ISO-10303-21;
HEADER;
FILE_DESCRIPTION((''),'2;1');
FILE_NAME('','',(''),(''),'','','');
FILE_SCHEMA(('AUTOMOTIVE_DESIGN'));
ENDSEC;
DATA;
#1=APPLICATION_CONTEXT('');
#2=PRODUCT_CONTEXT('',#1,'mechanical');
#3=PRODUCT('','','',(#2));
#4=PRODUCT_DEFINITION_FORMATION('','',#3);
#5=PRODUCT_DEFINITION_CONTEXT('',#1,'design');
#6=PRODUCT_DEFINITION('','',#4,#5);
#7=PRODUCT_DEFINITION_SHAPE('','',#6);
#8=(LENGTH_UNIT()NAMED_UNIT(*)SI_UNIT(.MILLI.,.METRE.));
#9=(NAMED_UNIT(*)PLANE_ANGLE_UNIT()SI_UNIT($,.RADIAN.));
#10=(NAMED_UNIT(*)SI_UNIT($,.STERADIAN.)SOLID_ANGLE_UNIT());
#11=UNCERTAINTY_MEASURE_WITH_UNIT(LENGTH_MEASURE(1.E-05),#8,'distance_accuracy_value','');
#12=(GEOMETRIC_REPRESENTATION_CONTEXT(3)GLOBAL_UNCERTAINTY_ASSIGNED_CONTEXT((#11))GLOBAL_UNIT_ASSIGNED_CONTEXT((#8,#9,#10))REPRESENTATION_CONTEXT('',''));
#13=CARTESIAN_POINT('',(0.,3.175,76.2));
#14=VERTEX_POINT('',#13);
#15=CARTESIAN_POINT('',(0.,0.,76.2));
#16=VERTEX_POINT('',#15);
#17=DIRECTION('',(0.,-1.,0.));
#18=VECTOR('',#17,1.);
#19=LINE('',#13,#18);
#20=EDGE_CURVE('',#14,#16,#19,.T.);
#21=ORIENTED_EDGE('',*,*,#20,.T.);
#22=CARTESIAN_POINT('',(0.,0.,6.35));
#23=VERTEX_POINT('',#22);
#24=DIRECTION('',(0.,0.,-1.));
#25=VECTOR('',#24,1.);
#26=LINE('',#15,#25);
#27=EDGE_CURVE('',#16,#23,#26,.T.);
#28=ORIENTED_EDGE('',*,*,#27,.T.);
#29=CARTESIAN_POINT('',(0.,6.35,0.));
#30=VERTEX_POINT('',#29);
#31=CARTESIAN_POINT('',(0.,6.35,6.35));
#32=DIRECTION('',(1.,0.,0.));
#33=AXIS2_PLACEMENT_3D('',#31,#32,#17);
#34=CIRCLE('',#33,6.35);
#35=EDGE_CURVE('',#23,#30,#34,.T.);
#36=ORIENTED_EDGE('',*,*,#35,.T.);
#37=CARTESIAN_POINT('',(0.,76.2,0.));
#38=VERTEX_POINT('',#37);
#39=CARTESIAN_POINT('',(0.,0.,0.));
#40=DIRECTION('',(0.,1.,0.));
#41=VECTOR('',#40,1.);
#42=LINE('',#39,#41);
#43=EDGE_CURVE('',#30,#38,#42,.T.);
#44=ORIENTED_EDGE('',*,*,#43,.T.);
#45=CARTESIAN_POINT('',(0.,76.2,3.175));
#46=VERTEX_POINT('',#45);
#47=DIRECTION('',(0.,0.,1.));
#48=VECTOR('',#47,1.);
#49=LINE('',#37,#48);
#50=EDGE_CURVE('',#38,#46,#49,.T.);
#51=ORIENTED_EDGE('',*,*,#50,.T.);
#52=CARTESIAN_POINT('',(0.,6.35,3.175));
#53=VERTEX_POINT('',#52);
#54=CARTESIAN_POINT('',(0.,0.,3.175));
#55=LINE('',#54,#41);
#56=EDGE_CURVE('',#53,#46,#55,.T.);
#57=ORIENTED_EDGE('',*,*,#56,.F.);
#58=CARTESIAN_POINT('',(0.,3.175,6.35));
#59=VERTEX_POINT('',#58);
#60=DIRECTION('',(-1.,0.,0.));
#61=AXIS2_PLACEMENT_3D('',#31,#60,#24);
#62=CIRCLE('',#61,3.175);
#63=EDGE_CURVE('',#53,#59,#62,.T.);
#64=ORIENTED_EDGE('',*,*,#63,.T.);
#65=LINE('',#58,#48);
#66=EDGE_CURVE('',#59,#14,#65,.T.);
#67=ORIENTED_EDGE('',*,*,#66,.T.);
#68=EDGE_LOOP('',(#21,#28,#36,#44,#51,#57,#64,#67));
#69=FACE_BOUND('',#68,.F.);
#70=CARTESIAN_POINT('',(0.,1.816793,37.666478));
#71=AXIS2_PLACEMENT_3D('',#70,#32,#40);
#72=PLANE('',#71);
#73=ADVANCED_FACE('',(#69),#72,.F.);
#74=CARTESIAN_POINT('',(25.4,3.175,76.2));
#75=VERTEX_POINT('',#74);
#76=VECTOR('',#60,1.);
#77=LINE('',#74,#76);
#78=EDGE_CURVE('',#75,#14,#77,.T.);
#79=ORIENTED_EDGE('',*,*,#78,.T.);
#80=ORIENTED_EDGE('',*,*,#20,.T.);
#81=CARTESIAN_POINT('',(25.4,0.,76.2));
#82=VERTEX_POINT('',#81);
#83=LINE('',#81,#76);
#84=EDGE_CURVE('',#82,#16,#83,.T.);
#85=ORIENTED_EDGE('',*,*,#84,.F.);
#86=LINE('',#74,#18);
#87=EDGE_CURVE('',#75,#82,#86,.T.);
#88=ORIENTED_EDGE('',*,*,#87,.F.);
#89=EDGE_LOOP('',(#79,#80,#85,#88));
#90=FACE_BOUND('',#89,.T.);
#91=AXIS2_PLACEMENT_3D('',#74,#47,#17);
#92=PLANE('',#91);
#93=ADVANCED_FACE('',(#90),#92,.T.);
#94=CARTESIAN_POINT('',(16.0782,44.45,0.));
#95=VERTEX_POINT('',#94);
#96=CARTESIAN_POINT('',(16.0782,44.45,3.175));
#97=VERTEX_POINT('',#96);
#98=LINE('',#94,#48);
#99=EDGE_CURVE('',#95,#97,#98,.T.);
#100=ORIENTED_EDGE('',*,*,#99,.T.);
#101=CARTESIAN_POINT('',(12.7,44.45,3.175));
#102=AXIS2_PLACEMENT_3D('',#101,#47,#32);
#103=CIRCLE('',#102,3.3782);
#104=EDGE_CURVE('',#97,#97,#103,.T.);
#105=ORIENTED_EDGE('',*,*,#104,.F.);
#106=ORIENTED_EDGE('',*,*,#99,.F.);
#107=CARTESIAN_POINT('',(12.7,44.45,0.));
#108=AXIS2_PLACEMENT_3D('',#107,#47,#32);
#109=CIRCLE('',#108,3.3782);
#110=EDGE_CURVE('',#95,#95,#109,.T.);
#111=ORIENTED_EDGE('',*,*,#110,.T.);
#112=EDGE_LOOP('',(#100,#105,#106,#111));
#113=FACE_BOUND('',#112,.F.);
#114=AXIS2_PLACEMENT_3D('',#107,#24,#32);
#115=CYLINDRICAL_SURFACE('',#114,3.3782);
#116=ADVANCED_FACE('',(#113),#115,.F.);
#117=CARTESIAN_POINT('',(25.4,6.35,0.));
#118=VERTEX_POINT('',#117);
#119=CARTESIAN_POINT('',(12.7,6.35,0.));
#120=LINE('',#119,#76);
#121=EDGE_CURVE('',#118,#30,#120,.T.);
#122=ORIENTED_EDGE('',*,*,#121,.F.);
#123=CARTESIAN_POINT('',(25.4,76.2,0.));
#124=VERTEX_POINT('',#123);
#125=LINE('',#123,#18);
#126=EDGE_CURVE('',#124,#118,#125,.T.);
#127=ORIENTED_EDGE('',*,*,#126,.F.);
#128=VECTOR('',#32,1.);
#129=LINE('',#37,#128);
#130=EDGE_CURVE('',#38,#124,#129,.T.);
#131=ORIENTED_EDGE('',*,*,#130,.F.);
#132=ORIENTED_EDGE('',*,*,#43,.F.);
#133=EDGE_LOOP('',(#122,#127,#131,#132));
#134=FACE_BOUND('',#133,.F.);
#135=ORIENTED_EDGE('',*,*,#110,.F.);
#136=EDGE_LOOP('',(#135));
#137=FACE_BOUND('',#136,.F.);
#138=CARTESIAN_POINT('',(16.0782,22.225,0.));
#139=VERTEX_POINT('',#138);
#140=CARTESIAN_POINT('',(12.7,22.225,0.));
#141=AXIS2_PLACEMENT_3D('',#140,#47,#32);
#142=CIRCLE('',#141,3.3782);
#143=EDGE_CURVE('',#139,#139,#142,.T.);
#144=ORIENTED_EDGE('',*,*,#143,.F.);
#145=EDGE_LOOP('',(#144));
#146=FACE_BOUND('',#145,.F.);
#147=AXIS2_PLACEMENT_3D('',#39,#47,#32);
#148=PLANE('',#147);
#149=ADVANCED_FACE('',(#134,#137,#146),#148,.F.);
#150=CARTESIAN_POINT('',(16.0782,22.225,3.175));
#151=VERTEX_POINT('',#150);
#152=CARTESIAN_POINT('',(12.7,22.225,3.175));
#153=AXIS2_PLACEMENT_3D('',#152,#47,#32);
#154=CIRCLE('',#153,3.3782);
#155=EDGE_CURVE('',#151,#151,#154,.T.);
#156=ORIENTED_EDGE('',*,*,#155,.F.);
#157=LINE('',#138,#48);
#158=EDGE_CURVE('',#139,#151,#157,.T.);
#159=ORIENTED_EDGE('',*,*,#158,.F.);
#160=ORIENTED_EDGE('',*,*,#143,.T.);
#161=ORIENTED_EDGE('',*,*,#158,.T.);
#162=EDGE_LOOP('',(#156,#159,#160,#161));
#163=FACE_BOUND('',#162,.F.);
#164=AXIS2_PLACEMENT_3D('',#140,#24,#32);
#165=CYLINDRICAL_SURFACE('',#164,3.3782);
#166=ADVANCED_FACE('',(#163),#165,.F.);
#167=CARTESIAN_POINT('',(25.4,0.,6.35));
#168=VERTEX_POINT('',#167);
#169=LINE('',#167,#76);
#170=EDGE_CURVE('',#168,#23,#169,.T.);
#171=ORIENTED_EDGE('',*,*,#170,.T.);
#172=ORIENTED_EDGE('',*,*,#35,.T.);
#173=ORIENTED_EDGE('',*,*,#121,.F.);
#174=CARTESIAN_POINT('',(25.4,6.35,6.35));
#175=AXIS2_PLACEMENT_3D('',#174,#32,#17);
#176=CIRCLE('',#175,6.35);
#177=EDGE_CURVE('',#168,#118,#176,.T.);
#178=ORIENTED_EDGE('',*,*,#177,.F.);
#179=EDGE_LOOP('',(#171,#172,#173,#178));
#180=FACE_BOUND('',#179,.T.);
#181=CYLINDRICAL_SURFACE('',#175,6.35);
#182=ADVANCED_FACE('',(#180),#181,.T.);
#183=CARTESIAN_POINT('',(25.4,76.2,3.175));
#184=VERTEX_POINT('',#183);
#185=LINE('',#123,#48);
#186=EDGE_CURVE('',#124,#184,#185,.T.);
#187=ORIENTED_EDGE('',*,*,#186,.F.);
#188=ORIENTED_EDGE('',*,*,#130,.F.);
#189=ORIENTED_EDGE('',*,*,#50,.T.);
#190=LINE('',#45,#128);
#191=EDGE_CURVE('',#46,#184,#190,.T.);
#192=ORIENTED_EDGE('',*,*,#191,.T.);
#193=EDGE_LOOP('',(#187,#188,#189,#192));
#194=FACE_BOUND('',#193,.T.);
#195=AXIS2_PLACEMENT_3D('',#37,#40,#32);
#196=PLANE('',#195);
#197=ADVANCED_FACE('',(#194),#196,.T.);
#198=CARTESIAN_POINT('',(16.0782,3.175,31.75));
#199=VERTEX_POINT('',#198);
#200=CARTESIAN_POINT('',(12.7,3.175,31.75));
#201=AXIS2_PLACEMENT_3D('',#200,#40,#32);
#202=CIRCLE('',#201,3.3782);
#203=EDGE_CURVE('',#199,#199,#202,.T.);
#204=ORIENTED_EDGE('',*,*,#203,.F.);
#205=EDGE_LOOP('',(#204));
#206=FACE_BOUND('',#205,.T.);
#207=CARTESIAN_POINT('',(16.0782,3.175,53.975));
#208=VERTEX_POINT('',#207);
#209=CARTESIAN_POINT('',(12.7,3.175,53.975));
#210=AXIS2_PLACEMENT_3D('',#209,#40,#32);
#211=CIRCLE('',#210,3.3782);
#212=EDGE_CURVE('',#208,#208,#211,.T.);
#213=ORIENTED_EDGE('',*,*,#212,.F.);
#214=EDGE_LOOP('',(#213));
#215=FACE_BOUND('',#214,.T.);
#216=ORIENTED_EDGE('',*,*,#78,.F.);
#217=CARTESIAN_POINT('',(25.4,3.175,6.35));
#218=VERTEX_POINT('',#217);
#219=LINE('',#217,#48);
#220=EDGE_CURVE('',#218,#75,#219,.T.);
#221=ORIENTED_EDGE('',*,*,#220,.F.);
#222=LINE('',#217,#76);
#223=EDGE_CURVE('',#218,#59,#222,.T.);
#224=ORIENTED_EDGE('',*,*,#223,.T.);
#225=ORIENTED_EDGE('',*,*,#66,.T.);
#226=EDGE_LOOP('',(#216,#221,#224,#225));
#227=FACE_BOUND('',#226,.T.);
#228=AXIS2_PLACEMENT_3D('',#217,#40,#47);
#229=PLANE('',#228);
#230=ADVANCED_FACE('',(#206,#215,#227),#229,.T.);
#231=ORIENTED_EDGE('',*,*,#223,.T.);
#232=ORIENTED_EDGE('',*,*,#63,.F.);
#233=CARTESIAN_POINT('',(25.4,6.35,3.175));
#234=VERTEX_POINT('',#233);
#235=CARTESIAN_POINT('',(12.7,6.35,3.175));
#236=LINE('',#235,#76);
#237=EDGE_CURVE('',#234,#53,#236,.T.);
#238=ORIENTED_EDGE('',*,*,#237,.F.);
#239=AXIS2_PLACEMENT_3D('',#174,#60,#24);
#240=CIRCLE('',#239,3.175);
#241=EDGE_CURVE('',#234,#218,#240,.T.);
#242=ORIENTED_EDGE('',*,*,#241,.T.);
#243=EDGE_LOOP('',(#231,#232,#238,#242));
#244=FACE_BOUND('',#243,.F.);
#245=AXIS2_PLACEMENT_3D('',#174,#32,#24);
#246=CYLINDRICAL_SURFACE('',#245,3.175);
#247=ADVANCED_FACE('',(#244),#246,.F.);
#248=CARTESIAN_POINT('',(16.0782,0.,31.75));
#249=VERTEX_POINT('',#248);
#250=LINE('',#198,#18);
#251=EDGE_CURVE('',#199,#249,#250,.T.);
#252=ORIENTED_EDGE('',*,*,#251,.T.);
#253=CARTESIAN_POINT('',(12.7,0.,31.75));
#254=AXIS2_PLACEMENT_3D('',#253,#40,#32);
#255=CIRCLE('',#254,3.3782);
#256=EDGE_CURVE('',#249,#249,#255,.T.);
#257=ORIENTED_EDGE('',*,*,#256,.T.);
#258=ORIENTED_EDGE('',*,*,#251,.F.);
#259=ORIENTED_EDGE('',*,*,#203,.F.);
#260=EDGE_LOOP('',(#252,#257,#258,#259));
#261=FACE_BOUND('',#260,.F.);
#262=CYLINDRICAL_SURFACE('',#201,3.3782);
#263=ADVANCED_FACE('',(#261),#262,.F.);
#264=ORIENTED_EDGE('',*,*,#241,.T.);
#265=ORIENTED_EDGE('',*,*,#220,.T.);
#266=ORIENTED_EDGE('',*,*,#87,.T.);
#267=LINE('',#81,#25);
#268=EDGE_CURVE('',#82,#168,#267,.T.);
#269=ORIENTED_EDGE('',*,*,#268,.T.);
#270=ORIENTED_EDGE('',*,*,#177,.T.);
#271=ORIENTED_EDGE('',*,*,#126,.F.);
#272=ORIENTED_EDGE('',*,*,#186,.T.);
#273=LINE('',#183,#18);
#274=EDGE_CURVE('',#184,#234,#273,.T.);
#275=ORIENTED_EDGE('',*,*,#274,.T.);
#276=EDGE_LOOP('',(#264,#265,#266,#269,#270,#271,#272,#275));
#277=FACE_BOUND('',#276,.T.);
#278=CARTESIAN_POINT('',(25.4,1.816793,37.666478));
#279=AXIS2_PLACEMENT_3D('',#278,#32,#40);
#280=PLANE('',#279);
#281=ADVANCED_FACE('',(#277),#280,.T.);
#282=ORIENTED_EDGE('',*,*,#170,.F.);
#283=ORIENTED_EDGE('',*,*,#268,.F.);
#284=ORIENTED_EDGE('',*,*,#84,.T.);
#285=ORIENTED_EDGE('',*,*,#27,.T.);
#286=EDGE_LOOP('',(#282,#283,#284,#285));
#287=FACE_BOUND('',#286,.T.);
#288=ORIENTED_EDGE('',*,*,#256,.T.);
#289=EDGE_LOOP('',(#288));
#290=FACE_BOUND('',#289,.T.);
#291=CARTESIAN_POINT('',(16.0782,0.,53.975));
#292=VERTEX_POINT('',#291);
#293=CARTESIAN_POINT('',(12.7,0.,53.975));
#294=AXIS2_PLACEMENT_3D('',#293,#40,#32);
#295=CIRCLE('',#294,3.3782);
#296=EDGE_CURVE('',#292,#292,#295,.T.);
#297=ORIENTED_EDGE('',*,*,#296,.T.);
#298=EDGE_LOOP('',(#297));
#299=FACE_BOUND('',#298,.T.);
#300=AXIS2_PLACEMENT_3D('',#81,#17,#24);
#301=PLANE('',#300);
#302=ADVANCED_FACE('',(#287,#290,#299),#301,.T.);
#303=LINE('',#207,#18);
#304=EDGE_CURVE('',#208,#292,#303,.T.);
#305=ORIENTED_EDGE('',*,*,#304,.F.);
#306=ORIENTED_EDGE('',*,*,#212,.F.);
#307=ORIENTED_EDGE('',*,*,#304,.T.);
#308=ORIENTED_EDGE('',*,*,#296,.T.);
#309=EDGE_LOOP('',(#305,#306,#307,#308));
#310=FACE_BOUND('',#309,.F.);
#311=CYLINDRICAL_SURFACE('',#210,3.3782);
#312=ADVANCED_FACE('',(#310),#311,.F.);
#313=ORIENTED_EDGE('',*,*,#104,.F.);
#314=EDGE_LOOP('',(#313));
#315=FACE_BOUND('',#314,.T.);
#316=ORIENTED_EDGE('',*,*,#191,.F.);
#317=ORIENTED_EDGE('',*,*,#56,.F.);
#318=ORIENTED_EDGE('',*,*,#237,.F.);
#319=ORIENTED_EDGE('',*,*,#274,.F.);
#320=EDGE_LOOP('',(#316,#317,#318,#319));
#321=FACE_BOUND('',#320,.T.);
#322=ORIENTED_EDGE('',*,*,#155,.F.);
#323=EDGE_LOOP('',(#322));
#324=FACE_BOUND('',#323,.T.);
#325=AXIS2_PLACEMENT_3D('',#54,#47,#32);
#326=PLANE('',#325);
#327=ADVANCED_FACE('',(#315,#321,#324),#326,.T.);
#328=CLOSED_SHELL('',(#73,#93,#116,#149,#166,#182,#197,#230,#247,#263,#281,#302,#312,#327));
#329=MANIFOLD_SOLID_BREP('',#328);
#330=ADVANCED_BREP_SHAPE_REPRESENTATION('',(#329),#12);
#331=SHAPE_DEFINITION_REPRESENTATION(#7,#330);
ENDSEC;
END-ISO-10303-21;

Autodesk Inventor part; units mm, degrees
ref_plane "YZ Plane" through (0, 0, 0) normal (1, 0, 0) x (0, 1, 0)
ref_plane "XZ Plane" through (0, 0, 0) normal (0, 1, 0) x (-1, 0, 0)
ref_plane "XY Plane" through (0, 0, 0) normal (0, 0, 1) x (1, 0, 0)
sketch "Sketch1" plane through (0, 0, 0) normal (0, 0, 1) x (1, 0, 0)
  line L0 (0, 0) -> (146.881681, 0)
  line L1 (146.881681, -25.4) -> (0, -25.4)
  line L2 (0, 0) -> (73.44084, 0)
  line L3 (73.44084, 0) -> (73.44084, -3.175)
  line L4 (73.44084, -3.175) -> (71.84064, -3.175)
  line L5 (71.84064, -3.175) -> (71.84064, -9.525)
  line L6 (71.84064, -9.525) -> (75.01564, -9.525)
  line L7 (75.01564, -9.525) -> (75.01564, -3.175)
  line L8 (75.01564, -3.175) -> (73.44084, -3.175)
  line L9 (73.44084, -25.4) -> (73.44084, -22.225)
  line L10 (73.44084, -22.225) -> (71.84064, -22.225)
  line L11 (71.84064, -22.225) -> (71.84064, -15.875)
  line L12 (71.84064, -15.875) -> (75.01564, -15.875)
  line L13 (75.01564, -15.875) -> (75.01564, -22.225)
  line L14 (75.01564, -22.225) -> (73.44084, -22.225)
  dimension "d8" = 6.7564
sketch "Sketch3" plane through (0, 3.175, 76.2) normal (0, 1, 0) x (1, 0, 0)
  line L0 (0, 0) -> (25.4, 0) projected
  circle A0 centre (12.7, 44.45) radius 3.3782
  circle A1 centre (12.7, 22.225) radius 3.3782
  line L1 (0, 76.2) -> (0, 73.025) projected
  dimension "d21" = 6.7564
  dimension "d22" = 6.7564
  dimension "d23" = 12.7
  dimension "d24" = 22.225
  dimension "d25" = 22.225
sketch "Sketch1 outline for Plate1" plane through (0, 0, 0) normal (0, 0, 1) x (1, 0, 0)
  line L0 (0, 0) -> (0, 76.2)
  line L1 (25.4, 0) -> (0, 0)
  line L2 (0, 76.2) -> (25.4, 76.2)
  line L3 (25.4, 76.2) -> (25.4, 0)
  circle A0 centre (12.7, 22.225) radius 3.3782
  circle A1 centre (12.7, 44.45) radius 3.3782
extrude "Plate1" add sketch "Sketch1 outline for Plate1" along normal blind 3.175
sketch "Sketch2" plane through (25.4, 3.175, 0) normal (0, -1, 0) x (1, 0, 0)
  line L0 (-25.4, 0) -> (0, 0)
  line L1 (0, 0) -> (0, 76.2)
  line L2 (0, 76.2) -> (-25.4, 76.2)
  line L3 (-25.4, 76.2) -> (-25.4, 0)
edge flange "Flange1" height 76.2 angle 90 thickness 3.175 bend radius 3.175 thickness toward (0, -1, 0) relief tear relief width 3.175 relief depth 1.5875 edges at (12.7, 0, 3.175) wall of the first edge with corners at (0, 3.175, 0) (25.4, 3.175, 0) (25.4, 3.175, 76.2) (0, 3.175, 76.2)
bend "Bend1"
corner "Corner1"
extrude "Cut1" cut sketch "Sketch3" against normal blind 3.175
equation "\"d11\" = BendReliefWidth"
equation "\"d12\" = BendReliefDepth"
equation "\"d13\" = MinimumRemnant"
equation "\"d14\" = BendRadius"
equation "\"d17\" = BendRadius"
equation "\"d18\" = CornerReliefSize"
equation "\"d19\" = GapSize"
equation "\"d20\" = JacobiRadiusSize"
equation "\"BendRadius\" = Thickness"
equation "\"BendReliefWidth\" = Thickness"
equation "\"BendReliefDepth\" = 0.5 * Thickness"
equation "\"CornerReliefSize\" = 4 * Thickness"
equation "\"MinimumRemnant\" = 2 * Thickness"
equation "\"TransitionRadius\" = BendRadius"
equation "\"JacobiRadiusSize\" = BendRadius"
equation "\"GapSize\" = Thickness"
equation "\"d10\" = BendRadius"
equation "\"d6\" = Thickness"
equation "\"Thickness\" = 3.175"
properties part number "Gusset 4" material "Aluminum 6061"
